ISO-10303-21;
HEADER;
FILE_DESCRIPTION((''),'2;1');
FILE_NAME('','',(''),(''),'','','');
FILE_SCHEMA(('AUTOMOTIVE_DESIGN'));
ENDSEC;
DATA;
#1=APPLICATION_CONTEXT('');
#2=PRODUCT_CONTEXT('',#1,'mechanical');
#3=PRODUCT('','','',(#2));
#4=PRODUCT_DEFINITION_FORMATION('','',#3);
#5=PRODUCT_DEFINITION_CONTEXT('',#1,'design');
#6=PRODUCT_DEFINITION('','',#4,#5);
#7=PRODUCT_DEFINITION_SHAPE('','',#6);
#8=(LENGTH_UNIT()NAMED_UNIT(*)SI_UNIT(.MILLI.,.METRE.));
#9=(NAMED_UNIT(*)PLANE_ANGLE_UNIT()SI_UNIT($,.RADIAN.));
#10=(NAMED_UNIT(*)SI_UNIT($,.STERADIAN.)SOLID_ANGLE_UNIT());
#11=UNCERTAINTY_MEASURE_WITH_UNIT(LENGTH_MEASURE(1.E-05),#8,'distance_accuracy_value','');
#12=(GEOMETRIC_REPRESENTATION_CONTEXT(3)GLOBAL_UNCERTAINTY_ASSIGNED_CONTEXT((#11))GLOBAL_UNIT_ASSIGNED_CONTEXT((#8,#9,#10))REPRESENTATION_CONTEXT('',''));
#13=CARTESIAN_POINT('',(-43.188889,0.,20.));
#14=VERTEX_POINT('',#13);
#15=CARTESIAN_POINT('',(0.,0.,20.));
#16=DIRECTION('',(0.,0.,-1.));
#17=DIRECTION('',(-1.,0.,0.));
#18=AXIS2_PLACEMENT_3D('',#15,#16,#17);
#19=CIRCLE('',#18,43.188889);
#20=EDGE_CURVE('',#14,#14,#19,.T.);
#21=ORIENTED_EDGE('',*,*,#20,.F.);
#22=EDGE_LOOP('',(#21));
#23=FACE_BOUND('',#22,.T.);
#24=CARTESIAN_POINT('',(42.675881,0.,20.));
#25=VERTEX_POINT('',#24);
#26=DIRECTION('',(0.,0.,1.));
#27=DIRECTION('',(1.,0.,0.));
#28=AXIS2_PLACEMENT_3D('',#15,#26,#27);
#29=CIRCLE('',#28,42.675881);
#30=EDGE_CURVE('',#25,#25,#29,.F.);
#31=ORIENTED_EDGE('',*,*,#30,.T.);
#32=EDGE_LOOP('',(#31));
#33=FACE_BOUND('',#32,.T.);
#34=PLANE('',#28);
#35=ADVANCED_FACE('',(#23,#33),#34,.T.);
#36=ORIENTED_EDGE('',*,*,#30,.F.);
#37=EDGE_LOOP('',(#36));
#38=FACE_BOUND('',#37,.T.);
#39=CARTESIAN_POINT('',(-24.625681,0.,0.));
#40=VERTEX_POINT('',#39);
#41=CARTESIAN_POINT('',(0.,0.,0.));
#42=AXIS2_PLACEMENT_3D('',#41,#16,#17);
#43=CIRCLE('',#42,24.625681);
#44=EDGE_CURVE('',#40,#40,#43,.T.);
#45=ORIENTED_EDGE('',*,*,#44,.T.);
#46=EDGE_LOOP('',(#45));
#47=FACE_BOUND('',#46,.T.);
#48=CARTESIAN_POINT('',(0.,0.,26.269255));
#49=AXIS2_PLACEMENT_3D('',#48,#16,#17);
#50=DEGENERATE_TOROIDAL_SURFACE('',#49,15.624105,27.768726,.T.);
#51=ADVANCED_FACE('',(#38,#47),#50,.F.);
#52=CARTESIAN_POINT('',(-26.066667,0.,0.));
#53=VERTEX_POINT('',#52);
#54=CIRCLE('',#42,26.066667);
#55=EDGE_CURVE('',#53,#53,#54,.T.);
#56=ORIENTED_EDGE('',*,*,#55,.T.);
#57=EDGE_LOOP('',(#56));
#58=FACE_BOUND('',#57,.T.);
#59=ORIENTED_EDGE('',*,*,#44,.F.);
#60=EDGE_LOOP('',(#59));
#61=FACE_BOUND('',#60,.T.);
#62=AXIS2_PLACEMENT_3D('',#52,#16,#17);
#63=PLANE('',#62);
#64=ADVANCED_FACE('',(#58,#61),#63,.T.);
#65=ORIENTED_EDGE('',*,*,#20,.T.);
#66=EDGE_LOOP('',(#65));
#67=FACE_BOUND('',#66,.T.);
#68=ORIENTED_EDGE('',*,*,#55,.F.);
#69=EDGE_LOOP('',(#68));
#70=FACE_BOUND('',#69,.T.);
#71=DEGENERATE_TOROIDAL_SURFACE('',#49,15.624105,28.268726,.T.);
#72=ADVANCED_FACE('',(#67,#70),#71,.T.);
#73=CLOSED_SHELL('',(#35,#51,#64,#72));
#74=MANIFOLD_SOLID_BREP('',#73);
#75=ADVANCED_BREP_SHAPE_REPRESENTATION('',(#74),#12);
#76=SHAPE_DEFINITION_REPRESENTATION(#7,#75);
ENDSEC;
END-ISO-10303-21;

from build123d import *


# Read off the part's stored shape, not the designer's step: Shell1
with BuildPart() as part:
    # Sketch3 → Revolve1 (revolve)
    with BuildSketch(Plane(origin=(0, 0, 0), x_dir=(1, 0, 0), z_dir=(0, 1, 0))):
        with BuildLine():
            Line((-26.066666667, 0), (0, 0))
            Line((0, 0), (0, -20))
            Line((0, -20), (-43.188888889, -20))
            ThreePointArc((-43.188888889, -20), (-37.098265739, -7.884987806), (-26.066666667, 0))
        make_face()
    revolve(axis=Axis((0, 0, 0), (0, 0, 1)))

    # Shell1 outline → Shell1 (revolve, cut)
    with BuildSketch(Plane.XZ):
        with BuildLine():
            Line((42.675881, 20), (0, 20))
            Line((0, 20), (0, 0))
            Line((0, 0), (24.625680859, 0))
            ThreePointArc((24.625680859, 0), (36.238688321, 7.664387682), (42.675881, 20))
        make_face()
    revolve(axis=Axis((0, 0, 0), (0, 0, 1)), mode=Mode.SUBTRACT)


solid = part.part
